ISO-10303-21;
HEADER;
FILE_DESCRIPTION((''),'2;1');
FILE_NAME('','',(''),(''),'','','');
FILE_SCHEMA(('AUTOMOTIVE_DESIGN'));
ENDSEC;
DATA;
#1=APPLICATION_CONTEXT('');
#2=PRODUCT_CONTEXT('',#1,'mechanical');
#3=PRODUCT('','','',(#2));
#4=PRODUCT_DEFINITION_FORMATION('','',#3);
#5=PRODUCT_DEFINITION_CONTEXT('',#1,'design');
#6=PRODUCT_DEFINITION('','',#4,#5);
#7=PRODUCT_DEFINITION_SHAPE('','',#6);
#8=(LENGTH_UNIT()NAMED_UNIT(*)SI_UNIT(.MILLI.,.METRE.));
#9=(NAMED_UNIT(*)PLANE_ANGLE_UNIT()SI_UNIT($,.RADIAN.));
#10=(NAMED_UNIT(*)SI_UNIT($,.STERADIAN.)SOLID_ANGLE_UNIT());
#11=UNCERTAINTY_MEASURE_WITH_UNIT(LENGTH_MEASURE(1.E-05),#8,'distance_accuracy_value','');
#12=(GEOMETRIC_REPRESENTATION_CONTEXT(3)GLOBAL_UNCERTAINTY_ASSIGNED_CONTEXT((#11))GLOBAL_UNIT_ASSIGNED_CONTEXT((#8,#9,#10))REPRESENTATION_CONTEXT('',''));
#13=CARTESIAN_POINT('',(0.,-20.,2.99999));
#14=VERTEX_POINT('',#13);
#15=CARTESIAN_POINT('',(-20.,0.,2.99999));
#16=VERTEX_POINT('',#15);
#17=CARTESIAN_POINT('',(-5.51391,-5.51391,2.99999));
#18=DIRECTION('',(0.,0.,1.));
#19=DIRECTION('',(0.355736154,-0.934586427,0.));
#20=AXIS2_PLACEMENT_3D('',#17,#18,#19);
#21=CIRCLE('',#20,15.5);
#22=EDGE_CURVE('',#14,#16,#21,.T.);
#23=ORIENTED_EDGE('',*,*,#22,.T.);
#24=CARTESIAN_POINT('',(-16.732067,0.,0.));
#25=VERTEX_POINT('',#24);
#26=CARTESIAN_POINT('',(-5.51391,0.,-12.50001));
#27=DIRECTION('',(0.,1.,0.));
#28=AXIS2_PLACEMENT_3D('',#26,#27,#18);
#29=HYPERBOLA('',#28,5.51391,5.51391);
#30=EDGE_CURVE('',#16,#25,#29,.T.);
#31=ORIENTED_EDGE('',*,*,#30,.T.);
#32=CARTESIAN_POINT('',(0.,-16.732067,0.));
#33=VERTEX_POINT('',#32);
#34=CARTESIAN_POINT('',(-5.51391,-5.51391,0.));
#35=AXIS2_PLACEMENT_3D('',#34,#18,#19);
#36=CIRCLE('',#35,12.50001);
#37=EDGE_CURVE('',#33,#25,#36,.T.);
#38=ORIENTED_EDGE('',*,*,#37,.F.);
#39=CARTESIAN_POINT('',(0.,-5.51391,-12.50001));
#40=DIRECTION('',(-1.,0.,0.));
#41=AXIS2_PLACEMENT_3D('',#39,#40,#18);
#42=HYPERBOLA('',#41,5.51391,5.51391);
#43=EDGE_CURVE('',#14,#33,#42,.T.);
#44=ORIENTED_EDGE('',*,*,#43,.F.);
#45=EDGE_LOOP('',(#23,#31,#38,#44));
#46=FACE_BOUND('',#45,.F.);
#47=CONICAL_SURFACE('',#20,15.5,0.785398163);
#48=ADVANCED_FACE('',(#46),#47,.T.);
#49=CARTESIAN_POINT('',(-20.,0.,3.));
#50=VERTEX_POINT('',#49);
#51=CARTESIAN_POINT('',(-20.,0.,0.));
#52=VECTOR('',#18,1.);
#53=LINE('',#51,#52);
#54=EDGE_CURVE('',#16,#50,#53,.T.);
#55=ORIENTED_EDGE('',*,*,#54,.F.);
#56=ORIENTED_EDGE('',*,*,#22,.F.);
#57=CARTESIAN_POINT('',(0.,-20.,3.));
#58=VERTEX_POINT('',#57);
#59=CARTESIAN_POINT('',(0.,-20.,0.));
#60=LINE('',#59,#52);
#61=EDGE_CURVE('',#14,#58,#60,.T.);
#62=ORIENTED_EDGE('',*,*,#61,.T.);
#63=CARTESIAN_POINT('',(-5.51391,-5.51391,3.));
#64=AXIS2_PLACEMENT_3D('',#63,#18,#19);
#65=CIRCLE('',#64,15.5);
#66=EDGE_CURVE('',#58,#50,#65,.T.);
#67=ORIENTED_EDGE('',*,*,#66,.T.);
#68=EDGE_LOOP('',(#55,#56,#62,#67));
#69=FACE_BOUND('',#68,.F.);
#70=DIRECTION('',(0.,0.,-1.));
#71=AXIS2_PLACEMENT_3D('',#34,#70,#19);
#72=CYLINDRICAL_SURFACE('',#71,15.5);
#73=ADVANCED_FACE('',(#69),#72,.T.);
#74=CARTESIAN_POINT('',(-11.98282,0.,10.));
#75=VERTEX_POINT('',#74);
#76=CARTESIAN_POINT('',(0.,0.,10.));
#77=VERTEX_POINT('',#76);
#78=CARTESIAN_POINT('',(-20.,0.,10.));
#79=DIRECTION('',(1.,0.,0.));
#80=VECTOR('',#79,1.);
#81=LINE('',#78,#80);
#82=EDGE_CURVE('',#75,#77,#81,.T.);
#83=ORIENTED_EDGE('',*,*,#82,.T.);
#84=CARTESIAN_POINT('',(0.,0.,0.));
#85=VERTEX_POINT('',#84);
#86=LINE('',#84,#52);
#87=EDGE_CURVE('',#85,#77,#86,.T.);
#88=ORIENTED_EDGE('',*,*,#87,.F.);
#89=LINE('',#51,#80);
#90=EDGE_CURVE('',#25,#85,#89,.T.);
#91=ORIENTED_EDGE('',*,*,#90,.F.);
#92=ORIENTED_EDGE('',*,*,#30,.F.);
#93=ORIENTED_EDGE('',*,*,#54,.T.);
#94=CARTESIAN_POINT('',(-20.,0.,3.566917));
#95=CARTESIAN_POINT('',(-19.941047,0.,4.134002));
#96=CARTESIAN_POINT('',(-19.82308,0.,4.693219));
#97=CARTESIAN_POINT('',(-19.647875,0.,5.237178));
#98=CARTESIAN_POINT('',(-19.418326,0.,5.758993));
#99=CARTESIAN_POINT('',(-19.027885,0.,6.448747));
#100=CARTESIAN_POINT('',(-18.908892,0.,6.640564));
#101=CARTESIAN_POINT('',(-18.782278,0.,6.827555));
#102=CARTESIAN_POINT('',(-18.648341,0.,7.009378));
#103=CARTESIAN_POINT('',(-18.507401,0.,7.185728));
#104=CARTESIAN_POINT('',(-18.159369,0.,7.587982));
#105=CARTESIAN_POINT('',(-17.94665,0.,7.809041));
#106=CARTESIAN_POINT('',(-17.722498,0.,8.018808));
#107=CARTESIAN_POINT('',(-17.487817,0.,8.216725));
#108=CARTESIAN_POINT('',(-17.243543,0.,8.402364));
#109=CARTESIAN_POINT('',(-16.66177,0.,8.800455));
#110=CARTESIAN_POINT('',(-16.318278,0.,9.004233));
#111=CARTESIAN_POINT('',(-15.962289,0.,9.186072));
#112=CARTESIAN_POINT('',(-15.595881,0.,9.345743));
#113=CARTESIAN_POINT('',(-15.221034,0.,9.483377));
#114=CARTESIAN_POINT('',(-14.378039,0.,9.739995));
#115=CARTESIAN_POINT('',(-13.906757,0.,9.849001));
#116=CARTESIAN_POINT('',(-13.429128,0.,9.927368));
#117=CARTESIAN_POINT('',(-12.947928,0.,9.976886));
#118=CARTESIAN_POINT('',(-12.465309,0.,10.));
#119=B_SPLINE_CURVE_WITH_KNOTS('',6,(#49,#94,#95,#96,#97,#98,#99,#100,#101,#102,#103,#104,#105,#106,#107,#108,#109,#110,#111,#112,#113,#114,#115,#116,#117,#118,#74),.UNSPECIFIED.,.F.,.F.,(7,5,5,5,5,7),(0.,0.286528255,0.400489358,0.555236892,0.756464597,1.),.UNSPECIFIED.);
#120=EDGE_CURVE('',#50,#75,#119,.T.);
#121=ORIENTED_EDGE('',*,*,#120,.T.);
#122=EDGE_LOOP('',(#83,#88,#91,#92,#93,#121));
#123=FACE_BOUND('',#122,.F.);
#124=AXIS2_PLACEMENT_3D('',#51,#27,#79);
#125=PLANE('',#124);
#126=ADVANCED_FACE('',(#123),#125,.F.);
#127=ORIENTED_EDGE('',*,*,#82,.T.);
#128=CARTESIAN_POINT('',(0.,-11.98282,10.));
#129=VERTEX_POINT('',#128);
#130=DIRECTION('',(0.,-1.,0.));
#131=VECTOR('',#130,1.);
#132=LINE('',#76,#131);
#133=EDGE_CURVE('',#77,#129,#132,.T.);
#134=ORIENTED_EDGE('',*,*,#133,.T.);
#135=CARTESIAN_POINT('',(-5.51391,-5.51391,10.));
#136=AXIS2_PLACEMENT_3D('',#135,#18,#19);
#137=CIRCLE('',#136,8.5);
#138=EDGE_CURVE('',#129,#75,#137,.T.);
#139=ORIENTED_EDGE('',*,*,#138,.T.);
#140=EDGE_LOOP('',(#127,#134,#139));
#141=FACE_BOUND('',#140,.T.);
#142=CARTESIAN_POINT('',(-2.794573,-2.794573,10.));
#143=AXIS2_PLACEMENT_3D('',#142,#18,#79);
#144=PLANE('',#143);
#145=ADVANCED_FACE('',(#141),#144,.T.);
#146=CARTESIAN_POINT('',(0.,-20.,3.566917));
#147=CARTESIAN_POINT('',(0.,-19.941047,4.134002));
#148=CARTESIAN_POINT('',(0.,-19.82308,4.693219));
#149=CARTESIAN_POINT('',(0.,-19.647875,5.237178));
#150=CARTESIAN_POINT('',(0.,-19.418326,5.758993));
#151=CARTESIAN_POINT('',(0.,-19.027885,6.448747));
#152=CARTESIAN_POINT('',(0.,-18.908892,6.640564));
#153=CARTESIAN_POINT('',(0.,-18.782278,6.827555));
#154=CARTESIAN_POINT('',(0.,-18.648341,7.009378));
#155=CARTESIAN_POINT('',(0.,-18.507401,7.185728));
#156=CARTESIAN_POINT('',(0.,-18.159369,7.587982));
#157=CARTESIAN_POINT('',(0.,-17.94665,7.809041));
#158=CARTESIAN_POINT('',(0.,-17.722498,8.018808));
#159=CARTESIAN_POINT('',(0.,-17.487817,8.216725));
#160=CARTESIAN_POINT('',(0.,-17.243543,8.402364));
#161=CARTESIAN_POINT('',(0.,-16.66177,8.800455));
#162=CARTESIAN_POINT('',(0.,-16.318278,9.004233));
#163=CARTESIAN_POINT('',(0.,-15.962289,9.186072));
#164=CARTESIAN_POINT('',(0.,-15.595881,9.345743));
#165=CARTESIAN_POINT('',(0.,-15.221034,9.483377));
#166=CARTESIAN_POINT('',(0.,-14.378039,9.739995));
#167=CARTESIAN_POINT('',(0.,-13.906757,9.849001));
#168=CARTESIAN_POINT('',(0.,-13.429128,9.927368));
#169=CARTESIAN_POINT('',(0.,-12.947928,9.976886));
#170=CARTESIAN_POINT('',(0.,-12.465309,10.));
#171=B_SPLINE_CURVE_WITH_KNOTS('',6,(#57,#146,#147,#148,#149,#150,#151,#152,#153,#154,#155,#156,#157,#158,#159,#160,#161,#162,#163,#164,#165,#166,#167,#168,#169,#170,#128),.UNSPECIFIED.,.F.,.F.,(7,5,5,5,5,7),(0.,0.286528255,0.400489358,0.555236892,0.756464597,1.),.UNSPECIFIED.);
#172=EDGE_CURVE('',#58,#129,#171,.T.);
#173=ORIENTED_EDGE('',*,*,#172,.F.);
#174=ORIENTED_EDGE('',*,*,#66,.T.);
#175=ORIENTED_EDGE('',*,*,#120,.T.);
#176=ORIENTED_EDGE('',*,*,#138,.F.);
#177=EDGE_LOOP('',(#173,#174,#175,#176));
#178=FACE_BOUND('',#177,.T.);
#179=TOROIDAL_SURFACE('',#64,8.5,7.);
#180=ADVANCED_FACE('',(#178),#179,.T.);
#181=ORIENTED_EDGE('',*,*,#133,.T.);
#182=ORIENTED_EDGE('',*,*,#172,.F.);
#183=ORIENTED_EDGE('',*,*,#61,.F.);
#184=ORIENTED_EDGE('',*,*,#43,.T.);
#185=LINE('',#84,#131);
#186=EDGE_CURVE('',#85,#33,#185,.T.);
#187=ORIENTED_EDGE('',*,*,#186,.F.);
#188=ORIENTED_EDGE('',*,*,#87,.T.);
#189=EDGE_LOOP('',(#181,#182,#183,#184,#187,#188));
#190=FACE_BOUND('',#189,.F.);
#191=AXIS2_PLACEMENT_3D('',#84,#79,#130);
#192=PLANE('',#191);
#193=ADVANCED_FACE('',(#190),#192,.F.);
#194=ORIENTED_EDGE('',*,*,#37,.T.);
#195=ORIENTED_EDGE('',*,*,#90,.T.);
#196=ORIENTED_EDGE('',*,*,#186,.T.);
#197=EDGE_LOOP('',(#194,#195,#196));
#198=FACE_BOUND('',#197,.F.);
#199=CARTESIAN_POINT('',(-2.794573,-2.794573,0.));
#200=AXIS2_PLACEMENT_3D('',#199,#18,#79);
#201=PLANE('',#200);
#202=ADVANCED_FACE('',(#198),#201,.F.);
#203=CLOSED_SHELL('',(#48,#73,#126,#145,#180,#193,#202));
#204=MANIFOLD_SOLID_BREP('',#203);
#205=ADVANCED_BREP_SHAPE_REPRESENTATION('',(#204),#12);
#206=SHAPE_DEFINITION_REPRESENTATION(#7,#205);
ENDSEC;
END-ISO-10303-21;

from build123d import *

# Parameters (mm, degrees)
F1_DEPTH = 10
F2_R     = 7
F3_SIZE  = 2.99999


# Not quite as in the source:
# - a fillet or chamfer is up to 0.001 mm smaller than in the source, because OpenCascade refuses the exact size


with BuildPart() as f1:
    # F0 (on Top) → F1 (new body)
    with BuildSketch(Plane.XY):
        with BuildLine():
            Line((-20, 0), (0, 0))
            Line((0, 0), (0, -20))
            ThreePointArc((0, -20), (5.4462447196, 5.4462447196), (-20, 0))
        make_face()
    extrude(amount=F1_DEPTH)

    # F2
    f2_edges = [f1.edges().sort_by_distance(p)[0] for p in [
        (5.446245, 5.446245, 10),
    ]]
    fillet(f2_edges, radius=F2_R)

    # F3 (size 3 in the source; OpenCascade refuses exactly that, so slightly less here)
    f3_edges = [f1.edges().sort_by_distance(p)[0] for p in [
        (5.446245, 5.446245, 0),
    ]]
    chamfer(f3_edges, length=F3_SIZE)


solid = f1.part
